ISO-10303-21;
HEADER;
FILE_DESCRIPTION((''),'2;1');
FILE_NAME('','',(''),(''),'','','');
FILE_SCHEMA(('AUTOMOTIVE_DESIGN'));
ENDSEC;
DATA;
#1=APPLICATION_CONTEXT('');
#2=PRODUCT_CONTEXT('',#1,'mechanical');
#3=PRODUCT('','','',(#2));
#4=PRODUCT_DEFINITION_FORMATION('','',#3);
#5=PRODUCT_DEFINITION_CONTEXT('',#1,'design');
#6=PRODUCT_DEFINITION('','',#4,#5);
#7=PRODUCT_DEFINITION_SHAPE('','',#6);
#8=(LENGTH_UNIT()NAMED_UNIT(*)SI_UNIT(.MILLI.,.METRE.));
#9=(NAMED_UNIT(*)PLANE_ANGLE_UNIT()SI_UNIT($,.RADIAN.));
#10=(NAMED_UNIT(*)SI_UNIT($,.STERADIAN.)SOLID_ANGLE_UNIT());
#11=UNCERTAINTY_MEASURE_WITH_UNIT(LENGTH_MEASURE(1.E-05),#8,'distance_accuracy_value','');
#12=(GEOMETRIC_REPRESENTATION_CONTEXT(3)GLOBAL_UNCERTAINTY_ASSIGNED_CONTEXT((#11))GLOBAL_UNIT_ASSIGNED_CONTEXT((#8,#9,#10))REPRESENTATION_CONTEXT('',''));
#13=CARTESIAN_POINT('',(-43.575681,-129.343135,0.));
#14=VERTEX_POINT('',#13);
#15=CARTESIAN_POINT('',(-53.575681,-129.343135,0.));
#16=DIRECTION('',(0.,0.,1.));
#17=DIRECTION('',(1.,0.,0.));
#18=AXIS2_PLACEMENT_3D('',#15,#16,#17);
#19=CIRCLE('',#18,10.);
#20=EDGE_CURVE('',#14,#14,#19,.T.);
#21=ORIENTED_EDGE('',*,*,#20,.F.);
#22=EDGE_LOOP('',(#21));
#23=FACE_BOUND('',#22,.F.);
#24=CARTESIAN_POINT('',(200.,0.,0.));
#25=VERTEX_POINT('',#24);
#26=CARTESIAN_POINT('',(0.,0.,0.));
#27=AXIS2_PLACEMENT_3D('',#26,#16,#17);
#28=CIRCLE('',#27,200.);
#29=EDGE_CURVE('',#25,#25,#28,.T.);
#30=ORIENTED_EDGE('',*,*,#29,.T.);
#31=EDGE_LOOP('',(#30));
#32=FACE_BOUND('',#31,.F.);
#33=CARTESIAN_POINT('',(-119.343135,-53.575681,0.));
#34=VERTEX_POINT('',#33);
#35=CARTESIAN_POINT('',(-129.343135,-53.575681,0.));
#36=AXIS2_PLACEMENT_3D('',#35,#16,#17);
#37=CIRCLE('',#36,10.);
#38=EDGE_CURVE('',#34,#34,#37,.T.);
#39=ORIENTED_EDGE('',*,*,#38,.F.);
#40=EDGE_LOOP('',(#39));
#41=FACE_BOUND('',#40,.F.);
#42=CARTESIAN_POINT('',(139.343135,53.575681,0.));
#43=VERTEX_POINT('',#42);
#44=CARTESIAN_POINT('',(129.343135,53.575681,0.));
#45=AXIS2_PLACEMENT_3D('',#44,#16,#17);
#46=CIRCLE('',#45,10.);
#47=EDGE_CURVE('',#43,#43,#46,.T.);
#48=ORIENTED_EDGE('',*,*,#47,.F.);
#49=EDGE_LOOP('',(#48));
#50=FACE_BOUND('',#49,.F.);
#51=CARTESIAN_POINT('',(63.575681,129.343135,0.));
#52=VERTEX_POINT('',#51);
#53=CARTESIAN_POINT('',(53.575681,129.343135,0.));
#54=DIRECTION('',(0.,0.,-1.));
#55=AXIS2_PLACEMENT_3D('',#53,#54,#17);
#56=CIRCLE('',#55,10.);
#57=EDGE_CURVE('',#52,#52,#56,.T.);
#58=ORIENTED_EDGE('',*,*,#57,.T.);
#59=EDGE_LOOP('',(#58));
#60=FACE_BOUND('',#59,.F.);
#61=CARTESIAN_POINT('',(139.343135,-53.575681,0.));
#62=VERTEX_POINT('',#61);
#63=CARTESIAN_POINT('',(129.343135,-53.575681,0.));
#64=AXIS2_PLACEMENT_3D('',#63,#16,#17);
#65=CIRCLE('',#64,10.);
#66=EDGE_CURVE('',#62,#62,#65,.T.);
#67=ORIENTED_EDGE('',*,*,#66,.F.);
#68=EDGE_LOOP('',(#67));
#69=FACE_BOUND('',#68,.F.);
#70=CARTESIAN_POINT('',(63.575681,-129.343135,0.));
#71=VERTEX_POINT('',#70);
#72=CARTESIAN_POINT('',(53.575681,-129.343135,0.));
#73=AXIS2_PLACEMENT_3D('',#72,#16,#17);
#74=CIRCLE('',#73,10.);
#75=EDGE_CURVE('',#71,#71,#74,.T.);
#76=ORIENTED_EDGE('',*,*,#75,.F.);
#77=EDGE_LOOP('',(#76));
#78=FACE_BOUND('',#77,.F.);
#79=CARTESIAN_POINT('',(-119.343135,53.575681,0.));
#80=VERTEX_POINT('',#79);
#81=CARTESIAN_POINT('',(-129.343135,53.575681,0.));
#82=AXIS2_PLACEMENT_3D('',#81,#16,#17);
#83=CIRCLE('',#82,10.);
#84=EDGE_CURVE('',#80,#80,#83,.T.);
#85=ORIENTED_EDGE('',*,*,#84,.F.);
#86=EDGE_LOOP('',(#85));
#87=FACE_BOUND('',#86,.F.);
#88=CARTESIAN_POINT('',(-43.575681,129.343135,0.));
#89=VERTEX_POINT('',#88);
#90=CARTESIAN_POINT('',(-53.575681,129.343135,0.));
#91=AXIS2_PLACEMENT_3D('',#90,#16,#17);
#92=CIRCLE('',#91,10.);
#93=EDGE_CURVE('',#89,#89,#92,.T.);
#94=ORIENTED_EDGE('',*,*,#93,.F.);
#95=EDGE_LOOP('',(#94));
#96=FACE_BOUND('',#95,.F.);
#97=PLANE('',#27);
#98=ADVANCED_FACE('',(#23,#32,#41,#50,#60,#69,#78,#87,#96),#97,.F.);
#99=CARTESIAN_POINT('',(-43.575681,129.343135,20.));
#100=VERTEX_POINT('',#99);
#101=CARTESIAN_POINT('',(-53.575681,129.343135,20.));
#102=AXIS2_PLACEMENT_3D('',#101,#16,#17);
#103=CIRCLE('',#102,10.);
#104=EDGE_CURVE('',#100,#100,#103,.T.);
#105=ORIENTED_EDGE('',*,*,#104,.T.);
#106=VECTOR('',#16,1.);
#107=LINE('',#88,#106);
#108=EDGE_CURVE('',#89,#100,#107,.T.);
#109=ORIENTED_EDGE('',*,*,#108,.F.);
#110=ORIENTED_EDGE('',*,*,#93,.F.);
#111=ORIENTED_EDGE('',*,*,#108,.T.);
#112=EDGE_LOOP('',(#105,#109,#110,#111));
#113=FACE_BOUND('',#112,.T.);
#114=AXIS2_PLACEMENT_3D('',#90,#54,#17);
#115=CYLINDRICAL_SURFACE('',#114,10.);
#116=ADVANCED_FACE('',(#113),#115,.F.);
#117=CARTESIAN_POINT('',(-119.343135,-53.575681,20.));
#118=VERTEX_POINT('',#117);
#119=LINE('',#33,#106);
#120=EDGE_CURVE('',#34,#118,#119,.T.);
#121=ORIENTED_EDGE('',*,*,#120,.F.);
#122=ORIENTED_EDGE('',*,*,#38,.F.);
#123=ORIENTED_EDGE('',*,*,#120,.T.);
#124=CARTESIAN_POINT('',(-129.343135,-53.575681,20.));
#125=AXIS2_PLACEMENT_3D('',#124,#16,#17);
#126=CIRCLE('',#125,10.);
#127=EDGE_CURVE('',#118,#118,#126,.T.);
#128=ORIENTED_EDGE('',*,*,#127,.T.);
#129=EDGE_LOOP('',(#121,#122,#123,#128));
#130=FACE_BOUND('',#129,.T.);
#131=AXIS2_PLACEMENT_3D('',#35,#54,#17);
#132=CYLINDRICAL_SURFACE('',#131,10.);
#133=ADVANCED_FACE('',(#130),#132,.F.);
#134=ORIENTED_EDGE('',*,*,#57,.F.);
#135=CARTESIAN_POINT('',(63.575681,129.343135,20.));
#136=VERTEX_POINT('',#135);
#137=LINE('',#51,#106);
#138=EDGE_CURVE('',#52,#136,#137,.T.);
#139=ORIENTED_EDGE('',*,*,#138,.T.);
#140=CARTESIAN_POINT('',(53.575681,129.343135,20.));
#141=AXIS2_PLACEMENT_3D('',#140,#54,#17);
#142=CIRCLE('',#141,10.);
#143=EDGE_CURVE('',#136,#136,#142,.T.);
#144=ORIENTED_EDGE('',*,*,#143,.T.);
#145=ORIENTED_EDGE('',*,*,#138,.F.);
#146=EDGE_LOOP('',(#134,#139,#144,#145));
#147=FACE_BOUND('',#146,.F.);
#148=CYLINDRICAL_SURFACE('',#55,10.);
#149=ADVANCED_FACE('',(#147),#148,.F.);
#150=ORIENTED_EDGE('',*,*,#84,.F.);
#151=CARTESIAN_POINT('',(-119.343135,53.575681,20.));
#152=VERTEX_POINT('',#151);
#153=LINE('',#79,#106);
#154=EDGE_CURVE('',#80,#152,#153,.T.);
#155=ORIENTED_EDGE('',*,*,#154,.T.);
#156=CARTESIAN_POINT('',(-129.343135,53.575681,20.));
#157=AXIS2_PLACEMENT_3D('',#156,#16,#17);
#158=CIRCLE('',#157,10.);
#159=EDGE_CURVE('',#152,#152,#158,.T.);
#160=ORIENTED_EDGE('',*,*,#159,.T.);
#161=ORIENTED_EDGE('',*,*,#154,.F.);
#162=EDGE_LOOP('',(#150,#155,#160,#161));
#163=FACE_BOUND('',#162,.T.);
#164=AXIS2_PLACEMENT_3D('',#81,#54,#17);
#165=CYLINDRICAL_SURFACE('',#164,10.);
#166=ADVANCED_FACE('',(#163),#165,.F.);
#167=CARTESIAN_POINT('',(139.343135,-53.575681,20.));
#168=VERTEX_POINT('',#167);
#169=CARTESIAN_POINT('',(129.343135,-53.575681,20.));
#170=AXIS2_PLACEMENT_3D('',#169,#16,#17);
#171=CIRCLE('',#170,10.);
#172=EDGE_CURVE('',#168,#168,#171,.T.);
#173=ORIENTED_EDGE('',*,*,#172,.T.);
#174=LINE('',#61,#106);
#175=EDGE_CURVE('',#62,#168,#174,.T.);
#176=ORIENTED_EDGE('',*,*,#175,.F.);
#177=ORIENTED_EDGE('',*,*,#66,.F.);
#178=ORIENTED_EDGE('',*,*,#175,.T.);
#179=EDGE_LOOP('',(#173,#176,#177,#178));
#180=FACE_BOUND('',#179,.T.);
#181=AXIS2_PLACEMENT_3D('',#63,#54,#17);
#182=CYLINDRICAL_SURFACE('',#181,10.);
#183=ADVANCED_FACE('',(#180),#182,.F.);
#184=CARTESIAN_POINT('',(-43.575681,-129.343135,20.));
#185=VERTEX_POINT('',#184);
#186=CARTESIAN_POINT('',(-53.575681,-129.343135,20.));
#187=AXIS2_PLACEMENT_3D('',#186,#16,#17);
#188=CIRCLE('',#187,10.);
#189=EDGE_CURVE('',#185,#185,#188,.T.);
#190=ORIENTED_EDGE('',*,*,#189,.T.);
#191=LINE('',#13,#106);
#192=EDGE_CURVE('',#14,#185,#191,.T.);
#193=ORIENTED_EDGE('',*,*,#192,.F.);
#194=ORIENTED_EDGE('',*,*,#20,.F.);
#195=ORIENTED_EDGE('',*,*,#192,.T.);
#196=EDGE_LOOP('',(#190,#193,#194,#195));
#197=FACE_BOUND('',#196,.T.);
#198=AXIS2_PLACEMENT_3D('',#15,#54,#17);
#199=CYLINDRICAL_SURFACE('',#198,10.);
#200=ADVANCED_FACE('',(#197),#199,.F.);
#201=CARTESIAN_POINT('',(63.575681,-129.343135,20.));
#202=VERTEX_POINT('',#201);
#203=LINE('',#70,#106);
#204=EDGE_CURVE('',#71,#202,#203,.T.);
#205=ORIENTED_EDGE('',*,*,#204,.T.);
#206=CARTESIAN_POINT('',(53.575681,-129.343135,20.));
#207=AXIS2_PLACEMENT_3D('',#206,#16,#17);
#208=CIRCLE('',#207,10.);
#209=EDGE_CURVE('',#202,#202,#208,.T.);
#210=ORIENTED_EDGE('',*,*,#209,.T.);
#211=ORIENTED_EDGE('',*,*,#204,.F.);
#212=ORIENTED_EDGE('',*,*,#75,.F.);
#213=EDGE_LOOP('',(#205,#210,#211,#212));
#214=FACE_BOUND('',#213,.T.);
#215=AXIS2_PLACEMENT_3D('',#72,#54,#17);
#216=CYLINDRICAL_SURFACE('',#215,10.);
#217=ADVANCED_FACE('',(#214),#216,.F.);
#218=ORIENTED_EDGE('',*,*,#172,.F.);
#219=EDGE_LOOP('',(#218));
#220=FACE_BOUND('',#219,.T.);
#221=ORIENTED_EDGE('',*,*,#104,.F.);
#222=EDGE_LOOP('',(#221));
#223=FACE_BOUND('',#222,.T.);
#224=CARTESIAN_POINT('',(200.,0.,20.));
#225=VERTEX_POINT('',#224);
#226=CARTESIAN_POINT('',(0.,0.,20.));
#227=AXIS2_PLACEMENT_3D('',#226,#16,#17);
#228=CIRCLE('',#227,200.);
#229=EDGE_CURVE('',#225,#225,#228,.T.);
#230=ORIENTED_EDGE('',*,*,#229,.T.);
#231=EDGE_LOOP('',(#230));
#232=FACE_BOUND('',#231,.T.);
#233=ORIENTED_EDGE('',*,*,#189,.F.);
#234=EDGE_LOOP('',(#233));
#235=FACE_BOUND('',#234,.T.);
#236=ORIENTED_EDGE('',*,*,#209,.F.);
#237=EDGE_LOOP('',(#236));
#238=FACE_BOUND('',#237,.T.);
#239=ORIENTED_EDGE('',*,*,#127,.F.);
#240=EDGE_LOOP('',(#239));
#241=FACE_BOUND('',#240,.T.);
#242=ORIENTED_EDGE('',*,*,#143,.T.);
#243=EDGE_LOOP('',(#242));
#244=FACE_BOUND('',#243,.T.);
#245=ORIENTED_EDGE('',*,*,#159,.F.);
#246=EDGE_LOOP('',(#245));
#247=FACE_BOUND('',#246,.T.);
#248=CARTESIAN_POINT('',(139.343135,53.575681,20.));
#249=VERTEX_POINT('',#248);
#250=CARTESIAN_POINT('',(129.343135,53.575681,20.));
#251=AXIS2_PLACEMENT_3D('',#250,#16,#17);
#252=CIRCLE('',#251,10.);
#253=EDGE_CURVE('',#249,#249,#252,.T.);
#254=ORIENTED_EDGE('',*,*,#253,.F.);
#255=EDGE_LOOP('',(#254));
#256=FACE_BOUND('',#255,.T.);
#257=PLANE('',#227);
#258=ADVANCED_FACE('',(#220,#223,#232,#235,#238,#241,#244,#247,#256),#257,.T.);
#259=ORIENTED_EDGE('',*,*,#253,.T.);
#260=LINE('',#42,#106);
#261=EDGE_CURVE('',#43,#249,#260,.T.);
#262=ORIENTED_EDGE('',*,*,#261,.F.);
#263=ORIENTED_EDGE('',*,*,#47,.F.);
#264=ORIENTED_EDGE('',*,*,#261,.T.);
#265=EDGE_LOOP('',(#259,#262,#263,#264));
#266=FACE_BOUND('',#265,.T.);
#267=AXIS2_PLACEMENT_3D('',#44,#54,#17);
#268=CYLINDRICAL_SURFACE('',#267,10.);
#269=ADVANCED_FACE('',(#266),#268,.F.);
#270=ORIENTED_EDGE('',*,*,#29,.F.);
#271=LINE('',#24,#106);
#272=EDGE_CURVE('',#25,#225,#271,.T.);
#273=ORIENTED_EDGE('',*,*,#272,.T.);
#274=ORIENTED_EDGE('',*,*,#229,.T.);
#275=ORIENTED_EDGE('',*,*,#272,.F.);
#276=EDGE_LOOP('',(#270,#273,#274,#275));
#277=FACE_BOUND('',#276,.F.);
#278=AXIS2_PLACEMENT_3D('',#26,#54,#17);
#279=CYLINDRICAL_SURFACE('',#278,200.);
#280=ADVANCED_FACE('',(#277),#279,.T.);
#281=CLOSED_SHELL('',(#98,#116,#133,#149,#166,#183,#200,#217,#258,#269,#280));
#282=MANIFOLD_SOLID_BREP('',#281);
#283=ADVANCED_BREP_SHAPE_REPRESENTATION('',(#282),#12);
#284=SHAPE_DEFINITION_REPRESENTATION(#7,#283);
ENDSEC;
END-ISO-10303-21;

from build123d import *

# Parameters (mm, degrees)
F0_R     = 200
F0_R_2   = 10
F1_DEPTH = 20


# Not quite as in the source:
# - a feature names something its author has since deleted; it is built from what else it names


with BuildPart() as f1:
    # F0 (on Top) → F1 (new body)
    with BuildSketch(Plane.XY):
        Circle(F0_R)
        with Locations((-53.5756805311, -129.3431345516)):
            Circle(F0_R_2, mode=Mode.SUBTRACT)
        with Locations((-129.3431345516, -53.5756805311)):
            Circle(F0_R_2, mode=Mode.SUBTRACT)
        with Locations((53.5756805311, -129.3431345516)):
            Circle(F0_R_2, mode=Mode.SUBTRACT)
        with Locations((129.3431345516, -53.5756805311)):
            Circle(F0_R_2, mode=Mode.SUBTRACT)
        with Locations((-129.3431345516, 53.5756805311)):
            Circle(F0_R_2, mode=Mode.SUBTRACT)
        with Locations((-53.5756805311, 129.3431345516)):
            Circle(F0_R_2, mode=Mode.SUBTRACT)
        with Locations((129.3431345516, 53.5756805311)):
            Circle(F0_R_2, mode=Mode.SUBTRACT)
        with BuildLine():
            ThreePointArc((49.7488462075, 120.1043392265), (48.0199782009, 137.6578306746), (63.5756805311, 129.3431345516))
            ThreePointArc((63.5756805311, 129.3431345516), (59.1313828613, 121.0284384286), (49.7488462075, 120.1043392265))
        make_face(mode=Mode.SUBTRACT)
    extrude(amount=F1_DEPTH)


solid = f1.part
